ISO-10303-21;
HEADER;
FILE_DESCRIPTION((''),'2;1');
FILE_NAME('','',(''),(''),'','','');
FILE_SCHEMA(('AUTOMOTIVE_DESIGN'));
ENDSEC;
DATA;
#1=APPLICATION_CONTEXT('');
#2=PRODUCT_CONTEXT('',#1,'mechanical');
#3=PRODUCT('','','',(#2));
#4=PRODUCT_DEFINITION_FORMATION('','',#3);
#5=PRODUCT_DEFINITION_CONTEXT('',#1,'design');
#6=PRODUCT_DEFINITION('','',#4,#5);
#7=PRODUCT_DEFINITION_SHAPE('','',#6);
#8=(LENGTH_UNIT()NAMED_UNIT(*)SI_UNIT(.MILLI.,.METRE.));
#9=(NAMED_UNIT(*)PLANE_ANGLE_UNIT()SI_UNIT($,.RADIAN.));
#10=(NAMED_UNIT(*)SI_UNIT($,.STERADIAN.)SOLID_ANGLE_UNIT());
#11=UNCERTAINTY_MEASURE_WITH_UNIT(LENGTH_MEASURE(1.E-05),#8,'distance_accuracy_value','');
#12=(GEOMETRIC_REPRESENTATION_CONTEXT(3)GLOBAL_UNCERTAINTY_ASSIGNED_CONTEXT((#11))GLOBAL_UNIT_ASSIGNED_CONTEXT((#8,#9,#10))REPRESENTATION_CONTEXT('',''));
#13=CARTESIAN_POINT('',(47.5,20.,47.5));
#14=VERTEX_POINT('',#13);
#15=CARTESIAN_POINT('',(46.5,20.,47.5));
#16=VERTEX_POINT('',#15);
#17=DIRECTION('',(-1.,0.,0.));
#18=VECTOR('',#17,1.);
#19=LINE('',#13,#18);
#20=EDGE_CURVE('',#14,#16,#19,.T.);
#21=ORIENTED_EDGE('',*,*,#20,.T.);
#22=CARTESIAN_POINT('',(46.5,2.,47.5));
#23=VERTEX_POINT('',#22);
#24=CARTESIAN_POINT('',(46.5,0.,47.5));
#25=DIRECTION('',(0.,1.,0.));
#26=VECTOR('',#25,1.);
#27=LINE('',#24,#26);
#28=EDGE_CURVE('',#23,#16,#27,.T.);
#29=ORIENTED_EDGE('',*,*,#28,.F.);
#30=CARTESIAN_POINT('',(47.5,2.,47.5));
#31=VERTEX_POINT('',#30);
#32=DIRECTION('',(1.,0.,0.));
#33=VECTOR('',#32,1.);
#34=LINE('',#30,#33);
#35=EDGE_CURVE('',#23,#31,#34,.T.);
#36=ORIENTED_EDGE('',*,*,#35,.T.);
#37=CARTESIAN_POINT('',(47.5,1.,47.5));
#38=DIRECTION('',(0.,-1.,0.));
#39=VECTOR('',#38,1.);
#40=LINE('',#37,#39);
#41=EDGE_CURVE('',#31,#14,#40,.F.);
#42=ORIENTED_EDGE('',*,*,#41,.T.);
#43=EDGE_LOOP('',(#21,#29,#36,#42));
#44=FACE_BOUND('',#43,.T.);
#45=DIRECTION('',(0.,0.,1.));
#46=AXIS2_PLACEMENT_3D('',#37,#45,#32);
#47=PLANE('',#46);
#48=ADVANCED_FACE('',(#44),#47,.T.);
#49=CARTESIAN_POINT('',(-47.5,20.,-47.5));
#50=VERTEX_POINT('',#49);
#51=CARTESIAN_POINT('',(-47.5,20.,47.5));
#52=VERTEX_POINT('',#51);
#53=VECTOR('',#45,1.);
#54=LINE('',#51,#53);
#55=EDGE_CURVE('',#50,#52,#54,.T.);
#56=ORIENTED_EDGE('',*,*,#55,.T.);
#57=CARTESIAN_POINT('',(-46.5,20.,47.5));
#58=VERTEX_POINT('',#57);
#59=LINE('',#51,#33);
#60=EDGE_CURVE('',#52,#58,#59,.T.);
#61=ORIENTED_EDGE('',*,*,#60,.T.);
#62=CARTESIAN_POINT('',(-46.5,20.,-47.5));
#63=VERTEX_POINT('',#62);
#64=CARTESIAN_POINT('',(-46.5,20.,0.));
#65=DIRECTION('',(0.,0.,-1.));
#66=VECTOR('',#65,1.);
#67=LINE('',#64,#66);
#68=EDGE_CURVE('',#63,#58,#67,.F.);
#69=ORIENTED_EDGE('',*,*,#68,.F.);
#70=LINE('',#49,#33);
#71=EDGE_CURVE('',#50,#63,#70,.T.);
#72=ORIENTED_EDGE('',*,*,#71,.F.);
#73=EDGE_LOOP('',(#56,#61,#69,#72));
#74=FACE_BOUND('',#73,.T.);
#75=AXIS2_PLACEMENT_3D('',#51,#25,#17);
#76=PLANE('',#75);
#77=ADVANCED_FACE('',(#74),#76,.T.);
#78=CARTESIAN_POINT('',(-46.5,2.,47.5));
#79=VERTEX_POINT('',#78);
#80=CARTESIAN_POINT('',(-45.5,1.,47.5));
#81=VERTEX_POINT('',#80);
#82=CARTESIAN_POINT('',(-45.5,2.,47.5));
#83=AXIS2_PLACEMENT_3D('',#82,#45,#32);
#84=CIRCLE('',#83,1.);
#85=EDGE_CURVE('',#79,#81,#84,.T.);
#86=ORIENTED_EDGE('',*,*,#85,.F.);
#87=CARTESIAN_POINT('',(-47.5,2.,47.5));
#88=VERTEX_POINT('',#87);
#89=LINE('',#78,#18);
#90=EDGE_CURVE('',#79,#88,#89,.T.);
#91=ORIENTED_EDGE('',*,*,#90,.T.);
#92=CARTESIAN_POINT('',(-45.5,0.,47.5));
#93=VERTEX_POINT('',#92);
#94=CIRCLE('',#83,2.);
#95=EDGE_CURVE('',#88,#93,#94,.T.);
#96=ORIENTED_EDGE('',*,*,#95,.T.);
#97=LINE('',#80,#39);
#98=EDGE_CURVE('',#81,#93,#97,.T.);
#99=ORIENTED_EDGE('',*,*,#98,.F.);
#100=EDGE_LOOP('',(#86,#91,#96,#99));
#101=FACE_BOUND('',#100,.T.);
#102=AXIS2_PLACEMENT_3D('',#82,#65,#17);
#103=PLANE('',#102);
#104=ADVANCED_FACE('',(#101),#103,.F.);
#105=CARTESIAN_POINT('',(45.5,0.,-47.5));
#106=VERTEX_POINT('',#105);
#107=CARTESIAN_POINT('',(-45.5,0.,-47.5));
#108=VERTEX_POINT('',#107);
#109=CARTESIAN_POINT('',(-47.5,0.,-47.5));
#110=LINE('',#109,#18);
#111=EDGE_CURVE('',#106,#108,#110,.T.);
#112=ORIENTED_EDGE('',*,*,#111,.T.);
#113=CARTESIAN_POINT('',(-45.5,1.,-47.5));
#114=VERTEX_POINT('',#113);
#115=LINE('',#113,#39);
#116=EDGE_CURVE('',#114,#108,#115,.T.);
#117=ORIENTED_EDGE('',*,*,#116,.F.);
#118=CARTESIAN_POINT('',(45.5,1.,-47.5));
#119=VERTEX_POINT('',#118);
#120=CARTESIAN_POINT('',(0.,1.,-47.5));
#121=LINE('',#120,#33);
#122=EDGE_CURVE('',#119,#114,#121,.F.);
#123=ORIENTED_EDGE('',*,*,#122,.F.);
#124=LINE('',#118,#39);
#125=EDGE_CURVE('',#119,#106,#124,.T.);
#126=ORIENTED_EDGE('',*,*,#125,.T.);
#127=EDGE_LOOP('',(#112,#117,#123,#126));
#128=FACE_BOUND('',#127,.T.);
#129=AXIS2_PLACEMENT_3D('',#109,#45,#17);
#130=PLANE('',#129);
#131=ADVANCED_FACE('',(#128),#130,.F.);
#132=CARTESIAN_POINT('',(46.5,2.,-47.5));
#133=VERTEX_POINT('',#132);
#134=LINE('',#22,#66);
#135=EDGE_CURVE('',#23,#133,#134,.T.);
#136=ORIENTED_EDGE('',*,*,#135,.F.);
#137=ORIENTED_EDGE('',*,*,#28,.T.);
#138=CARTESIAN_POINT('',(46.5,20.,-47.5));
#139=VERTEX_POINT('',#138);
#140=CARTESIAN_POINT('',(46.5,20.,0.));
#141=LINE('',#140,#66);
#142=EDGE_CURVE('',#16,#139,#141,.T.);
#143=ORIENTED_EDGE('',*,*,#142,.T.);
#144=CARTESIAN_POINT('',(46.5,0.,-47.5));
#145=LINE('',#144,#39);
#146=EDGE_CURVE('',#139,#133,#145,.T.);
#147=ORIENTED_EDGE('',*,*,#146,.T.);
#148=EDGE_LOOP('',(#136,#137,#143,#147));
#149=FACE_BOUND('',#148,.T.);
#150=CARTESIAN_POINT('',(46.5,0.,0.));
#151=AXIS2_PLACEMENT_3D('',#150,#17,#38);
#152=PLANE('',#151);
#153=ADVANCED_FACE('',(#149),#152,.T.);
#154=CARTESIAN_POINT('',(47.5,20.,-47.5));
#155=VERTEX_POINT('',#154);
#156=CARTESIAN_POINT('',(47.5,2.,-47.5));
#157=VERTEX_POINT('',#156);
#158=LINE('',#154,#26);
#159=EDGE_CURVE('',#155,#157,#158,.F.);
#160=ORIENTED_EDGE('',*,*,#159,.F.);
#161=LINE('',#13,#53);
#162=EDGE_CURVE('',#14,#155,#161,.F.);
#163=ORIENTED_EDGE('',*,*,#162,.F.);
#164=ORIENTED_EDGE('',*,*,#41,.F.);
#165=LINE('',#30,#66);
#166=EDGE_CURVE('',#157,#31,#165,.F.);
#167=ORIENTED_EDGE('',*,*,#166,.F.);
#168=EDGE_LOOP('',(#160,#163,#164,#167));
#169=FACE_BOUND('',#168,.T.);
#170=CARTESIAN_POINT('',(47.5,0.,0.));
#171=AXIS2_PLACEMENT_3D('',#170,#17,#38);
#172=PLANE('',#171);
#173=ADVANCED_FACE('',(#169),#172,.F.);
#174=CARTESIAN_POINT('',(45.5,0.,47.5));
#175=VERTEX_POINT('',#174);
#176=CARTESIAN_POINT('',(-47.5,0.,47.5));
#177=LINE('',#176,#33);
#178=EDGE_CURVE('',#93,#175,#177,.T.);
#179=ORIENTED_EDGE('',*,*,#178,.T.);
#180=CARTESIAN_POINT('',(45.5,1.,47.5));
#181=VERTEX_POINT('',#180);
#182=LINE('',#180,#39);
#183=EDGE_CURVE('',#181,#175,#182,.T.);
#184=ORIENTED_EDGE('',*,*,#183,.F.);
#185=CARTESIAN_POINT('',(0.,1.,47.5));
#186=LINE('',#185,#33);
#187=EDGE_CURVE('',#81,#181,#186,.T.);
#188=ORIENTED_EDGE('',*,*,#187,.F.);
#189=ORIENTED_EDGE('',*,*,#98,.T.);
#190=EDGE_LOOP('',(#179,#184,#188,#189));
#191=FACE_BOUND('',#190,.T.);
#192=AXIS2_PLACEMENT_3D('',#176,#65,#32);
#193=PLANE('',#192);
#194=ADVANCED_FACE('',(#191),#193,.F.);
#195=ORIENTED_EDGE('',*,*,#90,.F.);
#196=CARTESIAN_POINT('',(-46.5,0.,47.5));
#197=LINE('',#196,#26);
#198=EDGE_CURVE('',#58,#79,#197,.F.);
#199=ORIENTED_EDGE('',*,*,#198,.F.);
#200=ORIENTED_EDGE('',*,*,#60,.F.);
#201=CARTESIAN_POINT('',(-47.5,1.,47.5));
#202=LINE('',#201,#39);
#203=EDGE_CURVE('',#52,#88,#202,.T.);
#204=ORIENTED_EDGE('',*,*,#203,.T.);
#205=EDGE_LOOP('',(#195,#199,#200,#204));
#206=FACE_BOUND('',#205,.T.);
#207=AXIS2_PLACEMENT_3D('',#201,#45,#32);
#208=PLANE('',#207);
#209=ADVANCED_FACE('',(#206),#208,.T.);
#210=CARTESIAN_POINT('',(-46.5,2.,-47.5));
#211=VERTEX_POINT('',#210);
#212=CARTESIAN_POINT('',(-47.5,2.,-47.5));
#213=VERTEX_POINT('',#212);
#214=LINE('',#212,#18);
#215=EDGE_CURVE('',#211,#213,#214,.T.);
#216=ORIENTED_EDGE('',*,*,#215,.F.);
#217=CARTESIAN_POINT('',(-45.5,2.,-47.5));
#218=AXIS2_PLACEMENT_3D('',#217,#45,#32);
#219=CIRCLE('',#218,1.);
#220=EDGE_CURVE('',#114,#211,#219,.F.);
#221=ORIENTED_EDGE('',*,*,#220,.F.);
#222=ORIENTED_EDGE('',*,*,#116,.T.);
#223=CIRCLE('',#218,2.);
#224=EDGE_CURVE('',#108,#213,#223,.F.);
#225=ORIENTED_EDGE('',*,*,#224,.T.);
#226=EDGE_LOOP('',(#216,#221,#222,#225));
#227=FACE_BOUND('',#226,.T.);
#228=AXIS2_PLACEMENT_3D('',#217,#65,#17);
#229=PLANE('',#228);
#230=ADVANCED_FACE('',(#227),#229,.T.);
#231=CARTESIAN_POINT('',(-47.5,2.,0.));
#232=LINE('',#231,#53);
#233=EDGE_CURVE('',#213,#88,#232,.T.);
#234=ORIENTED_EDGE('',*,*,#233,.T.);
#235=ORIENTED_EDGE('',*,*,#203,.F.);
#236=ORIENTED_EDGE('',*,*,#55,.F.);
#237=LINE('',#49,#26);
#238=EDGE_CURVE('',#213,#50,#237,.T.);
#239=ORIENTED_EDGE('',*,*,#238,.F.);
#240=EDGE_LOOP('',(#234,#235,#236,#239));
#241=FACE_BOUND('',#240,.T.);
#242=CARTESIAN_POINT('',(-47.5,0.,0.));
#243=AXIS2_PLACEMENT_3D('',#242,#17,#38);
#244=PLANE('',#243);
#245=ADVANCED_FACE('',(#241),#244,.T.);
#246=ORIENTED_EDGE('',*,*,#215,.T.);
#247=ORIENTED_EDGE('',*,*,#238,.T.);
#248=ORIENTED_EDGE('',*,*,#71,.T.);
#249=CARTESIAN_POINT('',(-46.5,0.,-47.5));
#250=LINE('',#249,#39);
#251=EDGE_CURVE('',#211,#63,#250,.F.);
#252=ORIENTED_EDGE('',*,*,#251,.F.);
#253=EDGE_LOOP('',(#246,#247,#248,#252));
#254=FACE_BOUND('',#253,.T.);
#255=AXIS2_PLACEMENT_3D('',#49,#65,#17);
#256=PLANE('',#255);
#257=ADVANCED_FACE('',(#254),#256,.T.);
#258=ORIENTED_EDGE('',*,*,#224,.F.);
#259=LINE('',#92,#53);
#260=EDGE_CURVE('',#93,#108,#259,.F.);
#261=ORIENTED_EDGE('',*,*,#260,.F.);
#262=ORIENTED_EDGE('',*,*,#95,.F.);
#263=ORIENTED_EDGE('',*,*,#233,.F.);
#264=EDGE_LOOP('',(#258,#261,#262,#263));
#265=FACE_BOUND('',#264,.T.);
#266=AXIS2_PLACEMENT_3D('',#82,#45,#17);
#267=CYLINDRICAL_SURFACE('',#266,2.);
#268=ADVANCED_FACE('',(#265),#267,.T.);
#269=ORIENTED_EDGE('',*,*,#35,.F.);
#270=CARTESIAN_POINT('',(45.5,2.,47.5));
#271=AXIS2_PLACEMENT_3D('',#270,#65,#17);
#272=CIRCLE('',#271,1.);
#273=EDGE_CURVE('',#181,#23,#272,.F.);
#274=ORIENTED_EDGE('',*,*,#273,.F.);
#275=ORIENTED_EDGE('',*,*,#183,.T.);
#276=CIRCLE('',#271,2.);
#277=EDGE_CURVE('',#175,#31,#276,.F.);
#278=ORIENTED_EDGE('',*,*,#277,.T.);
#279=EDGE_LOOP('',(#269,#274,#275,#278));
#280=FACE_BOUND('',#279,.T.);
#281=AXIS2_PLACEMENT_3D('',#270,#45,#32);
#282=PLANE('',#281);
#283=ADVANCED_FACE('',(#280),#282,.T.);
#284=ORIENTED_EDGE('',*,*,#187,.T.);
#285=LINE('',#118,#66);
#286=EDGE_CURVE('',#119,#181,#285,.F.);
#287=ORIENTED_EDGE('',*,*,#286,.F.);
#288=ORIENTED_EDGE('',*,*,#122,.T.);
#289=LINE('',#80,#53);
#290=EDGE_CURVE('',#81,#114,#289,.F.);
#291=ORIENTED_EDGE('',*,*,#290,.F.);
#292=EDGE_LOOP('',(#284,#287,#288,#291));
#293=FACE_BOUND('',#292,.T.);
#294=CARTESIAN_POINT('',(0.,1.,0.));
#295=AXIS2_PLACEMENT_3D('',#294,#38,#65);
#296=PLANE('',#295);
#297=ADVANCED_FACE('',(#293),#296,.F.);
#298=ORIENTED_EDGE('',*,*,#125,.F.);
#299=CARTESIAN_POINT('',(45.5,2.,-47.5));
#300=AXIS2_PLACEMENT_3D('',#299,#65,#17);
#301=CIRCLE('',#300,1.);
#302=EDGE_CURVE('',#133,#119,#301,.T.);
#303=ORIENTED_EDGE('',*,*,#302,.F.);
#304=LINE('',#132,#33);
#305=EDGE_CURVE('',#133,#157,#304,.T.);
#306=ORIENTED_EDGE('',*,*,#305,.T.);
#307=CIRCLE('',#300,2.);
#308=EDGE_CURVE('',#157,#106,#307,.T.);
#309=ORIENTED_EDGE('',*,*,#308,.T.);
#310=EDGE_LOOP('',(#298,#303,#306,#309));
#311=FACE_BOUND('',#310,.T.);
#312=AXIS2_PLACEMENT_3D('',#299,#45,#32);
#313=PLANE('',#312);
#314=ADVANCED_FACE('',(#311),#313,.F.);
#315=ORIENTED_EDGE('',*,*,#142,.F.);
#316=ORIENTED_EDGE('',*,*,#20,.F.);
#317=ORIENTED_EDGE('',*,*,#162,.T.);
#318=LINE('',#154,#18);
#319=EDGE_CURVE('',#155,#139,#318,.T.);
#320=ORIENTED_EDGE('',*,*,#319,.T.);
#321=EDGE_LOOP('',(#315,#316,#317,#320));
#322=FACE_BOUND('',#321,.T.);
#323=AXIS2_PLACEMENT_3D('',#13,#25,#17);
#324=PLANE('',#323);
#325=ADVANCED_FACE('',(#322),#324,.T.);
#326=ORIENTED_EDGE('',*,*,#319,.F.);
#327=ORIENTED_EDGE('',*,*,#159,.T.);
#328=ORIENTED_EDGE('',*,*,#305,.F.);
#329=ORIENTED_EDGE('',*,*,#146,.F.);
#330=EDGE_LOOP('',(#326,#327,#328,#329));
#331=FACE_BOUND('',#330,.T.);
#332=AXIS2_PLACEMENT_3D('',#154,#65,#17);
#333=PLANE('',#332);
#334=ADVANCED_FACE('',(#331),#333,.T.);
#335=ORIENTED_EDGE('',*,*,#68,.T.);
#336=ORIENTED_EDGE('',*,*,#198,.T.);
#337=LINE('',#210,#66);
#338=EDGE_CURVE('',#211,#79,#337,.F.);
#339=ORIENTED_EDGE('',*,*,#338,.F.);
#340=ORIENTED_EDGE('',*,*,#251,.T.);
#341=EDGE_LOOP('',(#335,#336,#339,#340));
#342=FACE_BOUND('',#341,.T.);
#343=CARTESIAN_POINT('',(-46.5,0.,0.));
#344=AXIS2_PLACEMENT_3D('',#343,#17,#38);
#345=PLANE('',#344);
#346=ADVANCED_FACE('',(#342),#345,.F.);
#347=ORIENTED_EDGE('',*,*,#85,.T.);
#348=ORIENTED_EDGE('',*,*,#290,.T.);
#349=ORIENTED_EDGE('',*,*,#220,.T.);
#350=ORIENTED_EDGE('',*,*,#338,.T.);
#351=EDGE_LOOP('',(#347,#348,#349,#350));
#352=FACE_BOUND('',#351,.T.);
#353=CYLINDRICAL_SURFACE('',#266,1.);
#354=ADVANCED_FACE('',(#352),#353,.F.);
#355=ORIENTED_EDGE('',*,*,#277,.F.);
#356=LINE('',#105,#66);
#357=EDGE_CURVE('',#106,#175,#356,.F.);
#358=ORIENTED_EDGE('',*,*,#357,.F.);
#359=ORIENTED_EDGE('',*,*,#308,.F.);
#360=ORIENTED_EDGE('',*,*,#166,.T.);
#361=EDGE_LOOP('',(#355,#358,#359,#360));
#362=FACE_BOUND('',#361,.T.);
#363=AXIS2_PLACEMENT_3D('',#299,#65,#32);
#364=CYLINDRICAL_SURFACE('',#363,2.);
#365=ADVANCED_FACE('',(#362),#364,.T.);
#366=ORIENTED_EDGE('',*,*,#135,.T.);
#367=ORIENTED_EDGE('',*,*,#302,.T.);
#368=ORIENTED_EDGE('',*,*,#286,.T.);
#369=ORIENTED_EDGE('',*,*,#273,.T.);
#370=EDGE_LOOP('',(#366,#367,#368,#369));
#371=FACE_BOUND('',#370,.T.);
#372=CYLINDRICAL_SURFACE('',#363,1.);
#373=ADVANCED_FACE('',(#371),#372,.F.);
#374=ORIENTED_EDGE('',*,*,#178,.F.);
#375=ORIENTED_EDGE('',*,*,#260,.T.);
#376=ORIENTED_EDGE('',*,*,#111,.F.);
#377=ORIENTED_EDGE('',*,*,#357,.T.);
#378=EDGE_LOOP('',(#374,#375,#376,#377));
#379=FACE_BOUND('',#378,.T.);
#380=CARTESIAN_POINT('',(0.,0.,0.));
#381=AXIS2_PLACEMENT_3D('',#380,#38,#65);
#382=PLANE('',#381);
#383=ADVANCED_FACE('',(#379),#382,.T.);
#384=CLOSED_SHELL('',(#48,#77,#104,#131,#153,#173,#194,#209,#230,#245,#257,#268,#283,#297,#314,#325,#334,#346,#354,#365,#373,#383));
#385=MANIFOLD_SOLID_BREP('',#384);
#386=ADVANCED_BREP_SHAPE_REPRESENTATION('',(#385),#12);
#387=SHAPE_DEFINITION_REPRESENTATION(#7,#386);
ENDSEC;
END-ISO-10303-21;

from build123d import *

# Parameters (mm, degrees)
SKETCH1_W                      = 95
SKETCH1_H                      = 95
BOSS_EXTRUDE1_DEPTH            = 1
EDGE_FLANGE1_STRIP_W           = 6
EDGE_FLANGE1_STRIP_H           = 1
EDGE_FLANGE1_STRIP_CUT_DEPTH   = 95
EDGE_FLANGE1_STRIP_2_W         = 6
EDGE_FLANGE1_STRIP_2_H         = 1
EDGE_FLANGE1_STRIP_CUT_2_DEPTH = 95
EDGE_FLANGE1_DEPTH             = 95
EDGE_FLANGE1_BEND_DEPTH        = 95


# Sheet-metal steps are written as plain solids
with BuildPart() as part:
    # Sketch1 → Boss-Extrude1 (new body)
    with BuildSketch(Plane(origin=(0, 0, 0), x_dir=(1, 0, 0), z_dir=(0, 1, 0))):
        Rectangle(SKETCH1_W, SKETCH1_H)
    extrude(amount=BOSS_EXTRUDE1_DEPTH)

    # Edge-Flange1 strip (across the edge) → Edge-Flange1 strip cut (cut)
    with BuildSketch(Plane(origin=(-47.5, 1, -47.5), x_dir=(1, 0, 0), z_dir=(0, 0, 1))):
        with Locations((-1, -0.5)):
            Rectangle(EDGE_FLANGE1_STRIP_W, EDGE_FLANGE1_STRIP_H)
    extrude(amount=EDGE_FLANGE1_STRIP_CUT_DEPTH, mode=Mode.SUBTRACT)

    # Edge-Flange1 strip 2 (across the edge) → Edge-Flange1 strip cut 2 (cut)
    with BuildSketch(Plane(origin=(47.5, 1, 47.5), x_dir=(-1, 0, 0), z_dir=(0, 0, -1))):
        with Locations((-1, -0.5)):
            Rectangle(EDGE_FLANGE1_STRIP_2_W, EDGE_FLANGE1_STRIP_2_H)
    extrude(amount=EDGE_FLANGE1_STRIP_CUT_2_DEPTH, mode=Mode.SUBTRACT)

    # Edge-Flange1 section (across the edge) → Edge-Flange1 (add)
    with BuildSketch(Plane(origin=(-47.5, 1, -47.5), x_dir=(1, 0, 0), z_dir=(0, 0, 1))):
        with BuildLine():
            Line((0, 1), (0, 19))
            Line((0, 19), (1, 19))
            Line((1, 19), (1, 1))
            ThreePointArc((1, 1), (1.292893219, 0.292893219), (2, 0))
            Line((2, 0), (2, -1))
            ThreePointArc((2, -1), (0.585786438, -0.414213562), (0, 1))
        make_face()
    extrude(amount=EDGE_FLANGE1_DEPTH)

    # Edge-Flange1 section 2 (across the edge) → Edge-Flange1 bend (add)
    with BuildSketch(Plane(origin=(47.5, 1, 47.5), x_dir=(-1, 0, 0), z_dir=(0, 0, -1))):
        with BuildLine():
            Line((0, 1), (0, 19))
            Line((0, 19), (1, 19))
            Line((1, 19), (1, 1))
            ThreePointArc((1, 1), (1.292893219, 0.292893219), (2, 0))
            Line((2, 0), (2, -1))
            ThreePointArc((2, -1), (0.585786438, -0.414213562), (0, 1))
        make_face()
    extrude(amount=EDGE_FLANGE1_BEND_DEPTH)


solid = part.part
